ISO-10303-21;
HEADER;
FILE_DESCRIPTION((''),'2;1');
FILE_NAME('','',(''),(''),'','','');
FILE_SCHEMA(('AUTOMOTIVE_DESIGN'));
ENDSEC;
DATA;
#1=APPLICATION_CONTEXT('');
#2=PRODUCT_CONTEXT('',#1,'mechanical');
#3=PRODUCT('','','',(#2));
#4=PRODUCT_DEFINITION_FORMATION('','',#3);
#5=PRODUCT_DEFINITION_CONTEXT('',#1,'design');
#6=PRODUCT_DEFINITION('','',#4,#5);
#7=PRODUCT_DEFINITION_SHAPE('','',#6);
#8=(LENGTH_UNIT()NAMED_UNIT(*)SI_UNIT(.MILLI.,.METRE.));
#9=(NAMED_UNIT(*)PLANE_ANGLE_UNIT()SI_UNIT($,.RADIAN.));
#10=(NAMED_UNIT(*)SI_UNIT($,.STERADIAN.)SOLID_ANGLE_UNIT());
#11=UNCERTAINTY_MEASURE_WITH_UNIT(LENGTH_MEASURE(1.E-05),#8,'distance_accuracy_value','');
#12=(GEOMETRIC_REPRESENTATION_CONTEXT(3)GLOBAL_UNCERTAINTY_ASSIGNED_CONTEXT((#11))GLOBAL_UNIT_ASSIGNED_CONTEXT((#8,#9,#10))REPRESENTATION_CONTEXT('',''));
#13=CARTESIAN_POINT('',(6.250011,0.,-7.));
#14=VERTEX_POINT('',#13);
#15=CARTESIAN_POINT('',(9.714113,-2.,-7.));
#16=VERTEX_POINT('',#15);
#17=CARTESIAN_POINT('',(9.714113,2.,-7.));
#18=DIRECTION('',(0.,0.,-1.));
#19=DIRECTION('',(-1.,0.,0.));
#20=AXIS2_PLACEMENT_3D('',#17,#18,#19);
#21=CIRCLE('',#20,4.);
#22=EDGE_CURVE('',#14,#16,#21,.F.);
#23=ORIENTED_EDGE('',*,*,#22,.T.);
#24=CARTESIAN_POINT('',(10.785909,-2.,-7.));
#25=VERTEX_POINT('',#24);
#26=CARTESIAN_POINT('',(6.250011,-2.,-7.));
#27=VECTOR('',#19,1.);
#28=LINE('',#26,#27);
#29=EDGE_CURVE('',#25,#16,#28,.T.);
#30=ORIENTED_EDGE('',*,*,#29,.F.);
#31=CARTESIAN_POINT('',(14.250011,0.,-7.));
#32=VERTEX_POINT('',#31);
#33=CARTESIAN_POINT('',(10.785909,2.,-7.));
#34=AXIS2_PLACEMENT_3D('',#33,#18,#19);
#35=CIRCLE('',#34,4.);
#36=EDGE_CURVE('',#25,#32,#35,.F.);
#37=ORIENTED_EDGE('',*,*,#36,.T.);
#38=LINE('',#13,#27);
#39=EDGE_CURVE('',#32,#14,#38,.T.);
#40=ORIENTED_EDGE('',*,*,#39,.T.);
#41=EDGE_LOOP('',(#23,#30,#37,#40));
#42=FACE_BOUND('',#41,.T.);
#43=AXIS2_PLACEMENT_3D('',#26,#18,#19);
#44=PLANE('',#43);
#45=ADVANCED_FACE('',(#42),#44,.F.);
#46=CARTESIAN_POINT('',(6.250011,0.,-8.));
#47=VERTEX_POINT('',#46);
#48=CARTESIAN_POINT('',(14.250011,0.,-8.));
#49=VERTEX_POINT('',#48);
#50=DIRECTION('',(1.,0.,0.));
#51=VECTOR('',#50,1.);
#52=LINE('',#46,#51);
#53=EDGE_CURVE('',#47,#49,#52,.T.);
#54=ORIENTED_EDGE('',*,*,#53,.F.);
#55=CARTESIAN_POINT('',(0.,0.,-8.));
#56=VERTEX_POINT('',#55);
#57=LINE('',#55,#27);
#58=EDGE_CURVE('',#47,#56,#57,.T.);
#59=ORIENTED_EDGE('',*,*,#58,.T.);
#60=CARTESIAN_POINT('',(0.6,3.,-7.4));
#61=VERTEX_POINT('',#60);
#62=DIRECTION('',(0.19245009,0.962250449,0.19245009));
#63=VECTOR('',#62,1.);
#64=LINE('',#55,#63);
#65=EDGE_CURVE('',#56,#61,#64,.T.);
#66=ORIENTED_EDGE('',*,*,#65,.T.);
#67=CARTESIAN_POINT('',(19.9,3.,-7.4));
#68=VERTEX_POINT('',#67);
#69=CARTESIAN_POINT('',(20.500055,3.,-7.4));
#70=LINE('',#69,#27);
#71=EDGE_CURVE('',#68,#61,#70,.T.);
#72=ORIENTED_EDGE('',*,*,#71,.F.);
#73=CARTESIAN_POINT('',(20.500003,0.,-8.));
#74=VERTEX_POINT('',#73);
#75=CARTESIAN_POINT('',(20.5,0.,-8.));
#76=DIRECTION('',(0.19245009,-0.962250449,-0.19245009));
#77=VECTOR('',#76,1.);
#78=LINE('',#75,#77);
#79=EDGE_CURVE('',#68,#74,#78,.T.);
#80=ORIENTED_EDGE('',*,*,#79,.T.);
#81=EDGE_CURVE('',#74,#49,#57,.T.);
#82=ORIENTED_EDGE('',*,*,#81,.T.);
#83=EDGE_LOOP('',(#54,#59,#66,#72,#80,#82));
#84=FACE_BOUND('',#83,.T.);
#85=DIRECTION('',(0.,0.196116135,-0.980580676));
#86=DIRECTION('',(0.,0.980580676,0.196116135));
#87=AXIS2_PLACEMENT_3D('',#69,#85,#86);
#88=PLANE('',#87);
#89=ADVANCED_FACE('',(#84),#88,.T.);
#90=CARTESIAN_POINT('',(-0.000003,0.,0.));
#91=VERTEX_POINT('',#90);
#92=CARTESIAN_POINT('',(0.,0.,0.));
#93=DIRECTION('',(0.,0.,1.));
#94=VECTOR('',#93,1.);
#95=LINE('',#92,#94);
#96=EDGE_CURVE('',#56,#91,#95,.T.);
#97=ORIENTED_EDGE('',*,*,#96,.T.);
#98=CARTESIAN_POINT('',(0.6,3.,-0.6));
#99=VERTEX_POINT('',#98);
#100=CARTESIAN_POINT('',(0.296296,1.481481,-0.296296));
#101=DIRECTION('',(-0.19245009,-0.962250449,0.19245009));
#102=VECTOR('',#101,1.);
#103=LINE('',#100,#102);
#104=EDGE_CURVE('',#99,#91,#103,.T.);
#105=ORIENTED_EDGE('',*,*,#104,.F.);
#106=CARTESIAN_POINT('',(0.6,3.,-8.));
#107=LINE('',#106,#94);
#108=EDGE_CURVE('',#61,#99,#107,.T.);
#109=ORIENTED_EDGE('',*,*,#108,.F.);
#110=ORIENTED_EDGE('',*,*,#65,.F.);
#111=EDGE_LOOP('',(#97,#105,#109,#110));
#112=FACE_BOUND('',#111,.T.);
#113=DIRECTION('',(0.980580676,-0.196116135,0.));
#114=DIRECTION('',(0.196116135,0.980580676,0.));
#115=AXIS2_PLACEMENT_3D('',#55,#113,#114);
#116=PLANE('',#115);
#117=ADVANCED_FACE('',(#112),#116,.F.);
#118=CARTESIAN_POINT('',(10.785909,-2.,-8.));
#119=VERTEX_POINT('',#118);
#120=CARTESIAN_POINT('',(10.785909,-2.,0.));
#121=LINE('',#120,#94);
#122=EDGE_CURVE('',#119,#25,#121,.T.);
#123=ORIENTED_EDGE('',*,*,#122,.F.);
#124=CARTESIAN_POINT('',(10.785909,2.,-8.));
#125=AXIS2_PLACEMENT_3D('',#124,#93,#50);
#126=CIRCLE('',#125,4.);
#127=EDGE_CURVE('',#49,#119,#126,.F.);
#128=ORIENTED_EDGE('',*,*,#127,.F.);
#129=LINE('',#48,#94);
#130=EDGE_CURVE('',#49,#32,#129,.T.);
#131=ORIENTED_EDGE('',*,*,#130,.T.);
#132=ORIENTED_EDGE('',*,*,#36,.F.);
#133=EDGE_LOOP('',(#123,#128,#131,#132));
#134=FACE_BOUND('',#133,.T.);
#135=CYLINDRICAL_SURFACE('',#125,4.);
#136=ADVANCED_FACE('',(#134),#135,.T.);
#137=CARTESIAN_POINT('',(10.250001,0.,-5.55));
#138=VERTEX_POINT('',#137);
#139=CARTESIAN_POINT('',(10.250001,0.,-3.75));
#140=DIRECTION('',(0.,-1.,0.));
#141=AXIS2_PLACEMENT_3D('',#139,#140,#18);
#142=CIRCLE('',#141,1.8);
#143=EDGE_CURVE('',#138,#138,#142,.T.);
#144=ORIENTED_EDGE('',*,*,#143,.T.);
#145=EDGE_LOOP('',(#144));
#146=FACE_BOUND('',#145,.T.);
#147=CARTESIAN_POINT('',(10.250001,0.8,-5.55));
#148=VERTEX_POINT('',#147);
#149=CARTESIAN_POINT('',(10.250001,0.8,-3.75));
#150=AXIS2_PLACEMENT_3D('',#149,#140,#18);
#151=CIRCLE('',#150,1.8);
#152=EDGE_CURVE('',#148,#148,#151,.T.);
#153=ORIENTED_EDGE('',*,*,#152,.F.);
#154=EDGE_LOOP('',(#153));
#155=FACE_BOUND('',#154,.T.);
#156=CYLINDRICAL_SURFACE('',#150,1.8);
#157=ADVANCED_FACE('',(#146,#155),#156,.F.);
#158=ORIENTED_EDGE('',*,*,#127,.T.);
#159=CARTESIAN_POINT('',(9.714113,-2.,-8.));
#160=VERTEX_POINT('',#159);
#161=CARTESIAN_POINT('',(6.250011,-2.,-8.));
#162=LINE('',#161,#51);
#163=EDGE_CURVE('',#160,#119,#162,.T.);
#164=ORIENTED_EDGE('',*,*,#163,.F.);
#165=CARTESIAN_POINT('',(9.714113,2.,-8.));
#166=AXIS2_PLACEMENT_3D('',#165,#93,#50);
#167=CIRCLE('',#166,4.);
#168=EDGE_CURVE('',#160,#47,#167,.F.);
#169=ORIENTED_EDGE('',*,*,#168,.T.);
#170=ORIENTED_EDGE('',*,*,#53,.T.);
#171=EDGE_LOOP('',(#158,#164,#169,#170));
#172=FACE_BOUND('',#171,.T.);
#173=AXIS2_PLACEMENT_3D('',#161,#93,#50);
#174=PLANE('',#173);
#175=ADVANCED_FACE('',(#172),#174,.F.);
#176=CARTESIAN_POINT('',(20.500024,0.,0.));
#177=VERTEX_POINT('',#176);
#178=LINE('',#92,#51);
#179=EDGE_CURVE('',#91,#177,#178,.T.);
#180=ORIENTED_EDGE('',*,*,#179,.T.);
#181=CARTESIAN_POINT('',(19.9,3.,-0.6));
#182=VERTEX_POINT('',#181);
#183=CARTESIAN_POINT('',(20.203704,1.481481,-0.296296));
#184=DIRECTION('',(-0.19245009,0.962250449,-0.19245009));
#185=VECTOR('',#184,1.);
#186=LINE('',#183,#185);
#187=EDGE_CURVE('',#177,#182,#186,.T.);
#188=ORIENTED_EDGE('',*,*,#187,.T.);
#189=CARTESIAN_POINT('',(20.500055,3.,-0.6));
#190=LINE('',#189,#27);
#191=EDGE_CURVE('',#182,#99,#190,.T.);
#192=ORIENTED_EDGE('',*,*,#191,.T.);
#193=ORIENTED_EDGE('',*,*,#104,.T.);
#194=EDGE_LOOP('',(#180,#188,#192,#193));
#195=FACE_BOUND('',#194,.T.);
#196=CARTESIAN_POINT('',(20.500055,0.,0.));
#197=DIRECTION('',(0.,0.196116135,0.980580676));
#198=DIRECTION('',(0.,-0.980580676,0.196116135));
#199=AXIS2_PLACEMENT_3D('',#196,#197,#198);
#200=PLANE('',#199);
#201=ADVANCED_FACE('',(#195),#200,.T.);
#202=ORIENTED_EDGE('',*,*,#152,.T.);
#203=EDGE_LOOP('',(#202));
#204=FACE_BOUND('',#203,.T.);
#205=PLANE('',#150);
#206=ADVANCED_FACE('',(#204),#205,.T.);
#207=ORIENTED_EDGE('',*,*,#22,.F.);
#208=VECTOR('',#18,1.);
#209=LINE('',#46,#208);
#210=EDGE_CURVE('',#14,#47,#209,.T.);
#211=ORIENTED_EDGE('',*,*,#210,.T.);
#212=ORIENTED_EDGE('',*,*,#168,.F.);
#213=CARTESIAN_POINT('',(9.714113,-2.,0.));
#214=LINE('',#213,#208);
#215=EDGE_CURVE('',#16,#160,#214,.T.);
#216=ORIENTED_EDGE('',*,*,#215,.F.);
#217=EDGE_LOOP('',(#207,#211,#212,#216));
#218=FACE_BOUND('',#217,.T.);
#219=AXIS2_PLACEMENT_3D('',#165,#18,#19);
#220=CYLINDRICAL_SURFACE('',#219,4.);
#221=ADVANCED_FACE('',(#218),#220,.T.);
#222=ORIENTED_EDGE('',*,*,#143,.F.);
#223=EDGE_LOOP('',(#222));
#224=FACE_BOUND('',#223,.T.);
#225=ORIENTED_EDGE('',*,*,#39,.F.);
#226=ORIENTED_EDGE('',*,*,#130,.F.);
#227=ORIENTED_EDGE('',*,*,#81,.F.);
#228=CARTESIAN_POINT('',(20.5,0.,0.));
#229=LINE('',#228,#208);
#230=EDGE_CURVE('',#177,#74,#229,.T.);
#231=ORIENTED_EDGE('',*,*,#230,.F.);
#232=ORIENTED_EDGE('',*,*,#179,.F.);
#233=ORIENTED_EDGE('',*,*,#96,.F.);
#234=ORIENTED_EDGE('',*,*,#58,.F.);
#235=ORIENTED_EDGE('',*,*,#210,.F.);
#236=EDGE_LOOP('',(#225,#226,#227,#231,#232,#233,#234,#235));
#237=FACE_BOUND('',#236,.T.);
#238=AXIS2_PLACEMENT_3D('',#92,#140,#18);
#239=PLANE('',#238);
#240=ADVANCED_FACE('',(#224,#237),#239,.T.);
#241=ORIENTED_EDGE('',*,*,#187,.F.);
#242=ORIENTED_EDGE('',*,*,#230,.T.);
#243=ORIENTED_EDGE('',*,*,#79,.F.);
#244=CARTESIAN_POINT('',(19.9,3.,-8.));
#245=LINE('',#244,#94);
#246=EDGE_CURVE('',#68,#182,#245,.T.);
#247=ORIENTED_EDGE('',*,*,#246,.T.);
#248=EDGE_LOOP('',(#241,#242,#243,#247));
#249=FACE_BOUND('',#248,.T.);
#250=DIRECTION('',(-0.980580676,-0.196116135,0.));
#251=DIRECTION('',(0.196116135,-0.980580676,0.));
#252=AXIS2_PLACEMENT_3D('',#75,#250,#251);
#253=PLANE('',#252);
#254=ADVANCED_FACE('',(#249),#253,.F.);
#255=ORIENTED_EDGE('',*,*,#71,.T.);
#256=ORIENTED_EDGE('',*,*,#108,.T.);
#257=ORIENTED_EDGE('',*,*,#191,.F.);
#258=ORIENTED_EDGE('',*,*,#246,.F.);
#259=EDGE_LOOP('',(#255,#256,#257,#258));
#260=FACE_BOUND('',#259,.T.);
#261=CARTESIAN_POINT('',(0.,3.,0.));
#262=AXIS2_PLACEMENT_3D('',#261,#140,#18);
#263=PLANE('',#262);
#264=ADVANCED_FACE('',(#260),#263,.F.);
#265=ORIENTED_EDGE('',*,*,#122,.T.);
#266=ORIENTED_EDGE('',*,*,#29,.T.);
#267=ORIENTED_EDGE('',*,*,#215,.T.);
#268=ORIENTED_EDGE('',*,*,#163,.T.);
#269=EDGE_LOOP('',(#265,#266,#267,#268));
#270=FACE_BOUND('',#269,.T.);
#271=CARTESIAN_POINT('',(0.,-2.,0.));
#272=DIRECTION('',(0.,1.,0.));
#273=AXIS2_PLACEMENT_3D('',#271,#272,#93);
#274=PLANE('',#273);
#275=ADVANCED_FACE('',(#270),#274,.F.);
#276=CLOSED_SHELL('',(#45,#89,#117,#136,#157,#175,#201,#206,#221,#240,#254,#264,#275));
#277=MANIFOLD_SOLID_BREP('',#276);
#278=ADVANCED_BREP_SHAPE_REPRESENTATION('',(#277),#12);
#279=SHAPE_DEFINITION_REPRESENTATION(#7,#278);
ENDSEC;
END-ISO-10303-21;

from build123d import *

# Parameters (mm, degrees)
SKETCH1_W               = 20.5
SKETCH1_H               = 8
BOSS_EXTRUDE1_DEPTH     = 3
CUT_EXTRUDE1_DEPTH      = 23.209232315
CUT_EXTRUDE1_DEPTH_BACK = 23.209232315
CUT_EXTRUDE2_DEPTH      = 23.209232315
CUT_EXTRUDE2_DEPTH_BACK = 23.209232315
SKETCH4_R               = 1.8
CUT_EXTRUDE3_DEPTH      = 0.8
SKETCH5_W               = 8
SKETCH5_H               = 1
BOSS_EXTRUDE2_DEPTH     = 2
FILLET1_R               = 4


with BuildPart() as part:
    # Sketch1 → Boss-Extrude1 (new body)
    with BuildSketch(Plane(origin=(0, 0, 0), x_dir=(1, 0, 0), z_dir=(0, 1, 0))):
        with Locations((10.25, 4)):
            Rectangle(SKETCH1_W, SKETCH1_H)
    extrude(amount=BOSS_EXTRUDE1_DEPTH)

    # Sketch2 → Cut-Extrude1 (cut, two sides: drawn at the far end of the back side and taken through both)
    with BuildSketch(Plane.XY.offset(-CUT_EXTRUDE1_DEPTH_BACK)):
        Polygon((0, 0), (0.6, 3), (0, 3), align=None)
        Polygon((20.5, 0), (19.9, 3), (20.5, 3), align=None)
    extrude(amount=CUT_EXTRUDE1_DEPTH + CUT_EXTRUDE1_DEPTH_BACK, mode=Mode.SUBTRACT)

    # Sketch3 → Cut-Extrude2 (cut, two sides: drawn at the far end of the back side and taken through both)
    with BuildSketch(Plane(origin=(0, 0, 0), x_dir=(0, 0, -1), z_dir=(1, 0, 0)).offset(-CUT_EXTRUDE2_DEPTH_BACK)):
        Polygon((0, 0), (0.6, 3), (0, 3), align=None)
        Polygon((8, 3), (7.4, 3), (8, 0), align=None)
    extrude(amount=CUT_EXTRUDE2_DEPTH + CUT_EXTRUDE2_DEPTH_BACK, mode=Mode.SUBTRACT)

    # Sketch4 → Cut-Extrude3 (cut)
    with BuildSketch(Plane.XZ):
        with Locations(Location((10.25000125, -3.75, 0), (0, 0, 270))):
            Circle(SKETCH4_R)
    extrude(amount=-CUT_EXTRUDE3_DEPTH, mode=Mode.SUBTRACT)

    # Sketch5 → Boss-Extrude2 (add)
    with BuildSketch(Plane.XZ):
        with Locations((10.250011, -7.5)):
            Rectangle(SKETCH5_W, SKETCH5_H)
    extrude(amount=BOSS_EXTRUDE2_DEPTH)

    # Fillet1
    # the kernel refuses this fillet: 4 mm, written as the material it takes off along each edge
    with BuildSketch(Plane(origin=(14.250011, -2, -16.660254038), x_dir=(0, 1, 0), z_dir=(0, 0, 1)), Plane(origin=(6.250011, -2, 1.660254038), x_dir=(0, 1, 0), z_dir=(0, 0, -1))) as fillet1_piece_1:
        with BuildLine():
            CenterArc((4, 3.464101615), FILLET1_R, 180, 60)
            Line((0, 3.464101615), (-0.08, 3.464101615))
            Line((-0.08, 3.464101615), (-0.08, 0))
            Line((-0.08, 0), (0, -0.08))
            ThreePointArc((0, -0.08), (1, -0.08), (1.96, -0.069282032))
            Line((1.96, -0.069282032), (2, 0))
        make_face()
    extrude(amount=18.320508076, mode=Mode.SUBTRACT)


solid = part.part
